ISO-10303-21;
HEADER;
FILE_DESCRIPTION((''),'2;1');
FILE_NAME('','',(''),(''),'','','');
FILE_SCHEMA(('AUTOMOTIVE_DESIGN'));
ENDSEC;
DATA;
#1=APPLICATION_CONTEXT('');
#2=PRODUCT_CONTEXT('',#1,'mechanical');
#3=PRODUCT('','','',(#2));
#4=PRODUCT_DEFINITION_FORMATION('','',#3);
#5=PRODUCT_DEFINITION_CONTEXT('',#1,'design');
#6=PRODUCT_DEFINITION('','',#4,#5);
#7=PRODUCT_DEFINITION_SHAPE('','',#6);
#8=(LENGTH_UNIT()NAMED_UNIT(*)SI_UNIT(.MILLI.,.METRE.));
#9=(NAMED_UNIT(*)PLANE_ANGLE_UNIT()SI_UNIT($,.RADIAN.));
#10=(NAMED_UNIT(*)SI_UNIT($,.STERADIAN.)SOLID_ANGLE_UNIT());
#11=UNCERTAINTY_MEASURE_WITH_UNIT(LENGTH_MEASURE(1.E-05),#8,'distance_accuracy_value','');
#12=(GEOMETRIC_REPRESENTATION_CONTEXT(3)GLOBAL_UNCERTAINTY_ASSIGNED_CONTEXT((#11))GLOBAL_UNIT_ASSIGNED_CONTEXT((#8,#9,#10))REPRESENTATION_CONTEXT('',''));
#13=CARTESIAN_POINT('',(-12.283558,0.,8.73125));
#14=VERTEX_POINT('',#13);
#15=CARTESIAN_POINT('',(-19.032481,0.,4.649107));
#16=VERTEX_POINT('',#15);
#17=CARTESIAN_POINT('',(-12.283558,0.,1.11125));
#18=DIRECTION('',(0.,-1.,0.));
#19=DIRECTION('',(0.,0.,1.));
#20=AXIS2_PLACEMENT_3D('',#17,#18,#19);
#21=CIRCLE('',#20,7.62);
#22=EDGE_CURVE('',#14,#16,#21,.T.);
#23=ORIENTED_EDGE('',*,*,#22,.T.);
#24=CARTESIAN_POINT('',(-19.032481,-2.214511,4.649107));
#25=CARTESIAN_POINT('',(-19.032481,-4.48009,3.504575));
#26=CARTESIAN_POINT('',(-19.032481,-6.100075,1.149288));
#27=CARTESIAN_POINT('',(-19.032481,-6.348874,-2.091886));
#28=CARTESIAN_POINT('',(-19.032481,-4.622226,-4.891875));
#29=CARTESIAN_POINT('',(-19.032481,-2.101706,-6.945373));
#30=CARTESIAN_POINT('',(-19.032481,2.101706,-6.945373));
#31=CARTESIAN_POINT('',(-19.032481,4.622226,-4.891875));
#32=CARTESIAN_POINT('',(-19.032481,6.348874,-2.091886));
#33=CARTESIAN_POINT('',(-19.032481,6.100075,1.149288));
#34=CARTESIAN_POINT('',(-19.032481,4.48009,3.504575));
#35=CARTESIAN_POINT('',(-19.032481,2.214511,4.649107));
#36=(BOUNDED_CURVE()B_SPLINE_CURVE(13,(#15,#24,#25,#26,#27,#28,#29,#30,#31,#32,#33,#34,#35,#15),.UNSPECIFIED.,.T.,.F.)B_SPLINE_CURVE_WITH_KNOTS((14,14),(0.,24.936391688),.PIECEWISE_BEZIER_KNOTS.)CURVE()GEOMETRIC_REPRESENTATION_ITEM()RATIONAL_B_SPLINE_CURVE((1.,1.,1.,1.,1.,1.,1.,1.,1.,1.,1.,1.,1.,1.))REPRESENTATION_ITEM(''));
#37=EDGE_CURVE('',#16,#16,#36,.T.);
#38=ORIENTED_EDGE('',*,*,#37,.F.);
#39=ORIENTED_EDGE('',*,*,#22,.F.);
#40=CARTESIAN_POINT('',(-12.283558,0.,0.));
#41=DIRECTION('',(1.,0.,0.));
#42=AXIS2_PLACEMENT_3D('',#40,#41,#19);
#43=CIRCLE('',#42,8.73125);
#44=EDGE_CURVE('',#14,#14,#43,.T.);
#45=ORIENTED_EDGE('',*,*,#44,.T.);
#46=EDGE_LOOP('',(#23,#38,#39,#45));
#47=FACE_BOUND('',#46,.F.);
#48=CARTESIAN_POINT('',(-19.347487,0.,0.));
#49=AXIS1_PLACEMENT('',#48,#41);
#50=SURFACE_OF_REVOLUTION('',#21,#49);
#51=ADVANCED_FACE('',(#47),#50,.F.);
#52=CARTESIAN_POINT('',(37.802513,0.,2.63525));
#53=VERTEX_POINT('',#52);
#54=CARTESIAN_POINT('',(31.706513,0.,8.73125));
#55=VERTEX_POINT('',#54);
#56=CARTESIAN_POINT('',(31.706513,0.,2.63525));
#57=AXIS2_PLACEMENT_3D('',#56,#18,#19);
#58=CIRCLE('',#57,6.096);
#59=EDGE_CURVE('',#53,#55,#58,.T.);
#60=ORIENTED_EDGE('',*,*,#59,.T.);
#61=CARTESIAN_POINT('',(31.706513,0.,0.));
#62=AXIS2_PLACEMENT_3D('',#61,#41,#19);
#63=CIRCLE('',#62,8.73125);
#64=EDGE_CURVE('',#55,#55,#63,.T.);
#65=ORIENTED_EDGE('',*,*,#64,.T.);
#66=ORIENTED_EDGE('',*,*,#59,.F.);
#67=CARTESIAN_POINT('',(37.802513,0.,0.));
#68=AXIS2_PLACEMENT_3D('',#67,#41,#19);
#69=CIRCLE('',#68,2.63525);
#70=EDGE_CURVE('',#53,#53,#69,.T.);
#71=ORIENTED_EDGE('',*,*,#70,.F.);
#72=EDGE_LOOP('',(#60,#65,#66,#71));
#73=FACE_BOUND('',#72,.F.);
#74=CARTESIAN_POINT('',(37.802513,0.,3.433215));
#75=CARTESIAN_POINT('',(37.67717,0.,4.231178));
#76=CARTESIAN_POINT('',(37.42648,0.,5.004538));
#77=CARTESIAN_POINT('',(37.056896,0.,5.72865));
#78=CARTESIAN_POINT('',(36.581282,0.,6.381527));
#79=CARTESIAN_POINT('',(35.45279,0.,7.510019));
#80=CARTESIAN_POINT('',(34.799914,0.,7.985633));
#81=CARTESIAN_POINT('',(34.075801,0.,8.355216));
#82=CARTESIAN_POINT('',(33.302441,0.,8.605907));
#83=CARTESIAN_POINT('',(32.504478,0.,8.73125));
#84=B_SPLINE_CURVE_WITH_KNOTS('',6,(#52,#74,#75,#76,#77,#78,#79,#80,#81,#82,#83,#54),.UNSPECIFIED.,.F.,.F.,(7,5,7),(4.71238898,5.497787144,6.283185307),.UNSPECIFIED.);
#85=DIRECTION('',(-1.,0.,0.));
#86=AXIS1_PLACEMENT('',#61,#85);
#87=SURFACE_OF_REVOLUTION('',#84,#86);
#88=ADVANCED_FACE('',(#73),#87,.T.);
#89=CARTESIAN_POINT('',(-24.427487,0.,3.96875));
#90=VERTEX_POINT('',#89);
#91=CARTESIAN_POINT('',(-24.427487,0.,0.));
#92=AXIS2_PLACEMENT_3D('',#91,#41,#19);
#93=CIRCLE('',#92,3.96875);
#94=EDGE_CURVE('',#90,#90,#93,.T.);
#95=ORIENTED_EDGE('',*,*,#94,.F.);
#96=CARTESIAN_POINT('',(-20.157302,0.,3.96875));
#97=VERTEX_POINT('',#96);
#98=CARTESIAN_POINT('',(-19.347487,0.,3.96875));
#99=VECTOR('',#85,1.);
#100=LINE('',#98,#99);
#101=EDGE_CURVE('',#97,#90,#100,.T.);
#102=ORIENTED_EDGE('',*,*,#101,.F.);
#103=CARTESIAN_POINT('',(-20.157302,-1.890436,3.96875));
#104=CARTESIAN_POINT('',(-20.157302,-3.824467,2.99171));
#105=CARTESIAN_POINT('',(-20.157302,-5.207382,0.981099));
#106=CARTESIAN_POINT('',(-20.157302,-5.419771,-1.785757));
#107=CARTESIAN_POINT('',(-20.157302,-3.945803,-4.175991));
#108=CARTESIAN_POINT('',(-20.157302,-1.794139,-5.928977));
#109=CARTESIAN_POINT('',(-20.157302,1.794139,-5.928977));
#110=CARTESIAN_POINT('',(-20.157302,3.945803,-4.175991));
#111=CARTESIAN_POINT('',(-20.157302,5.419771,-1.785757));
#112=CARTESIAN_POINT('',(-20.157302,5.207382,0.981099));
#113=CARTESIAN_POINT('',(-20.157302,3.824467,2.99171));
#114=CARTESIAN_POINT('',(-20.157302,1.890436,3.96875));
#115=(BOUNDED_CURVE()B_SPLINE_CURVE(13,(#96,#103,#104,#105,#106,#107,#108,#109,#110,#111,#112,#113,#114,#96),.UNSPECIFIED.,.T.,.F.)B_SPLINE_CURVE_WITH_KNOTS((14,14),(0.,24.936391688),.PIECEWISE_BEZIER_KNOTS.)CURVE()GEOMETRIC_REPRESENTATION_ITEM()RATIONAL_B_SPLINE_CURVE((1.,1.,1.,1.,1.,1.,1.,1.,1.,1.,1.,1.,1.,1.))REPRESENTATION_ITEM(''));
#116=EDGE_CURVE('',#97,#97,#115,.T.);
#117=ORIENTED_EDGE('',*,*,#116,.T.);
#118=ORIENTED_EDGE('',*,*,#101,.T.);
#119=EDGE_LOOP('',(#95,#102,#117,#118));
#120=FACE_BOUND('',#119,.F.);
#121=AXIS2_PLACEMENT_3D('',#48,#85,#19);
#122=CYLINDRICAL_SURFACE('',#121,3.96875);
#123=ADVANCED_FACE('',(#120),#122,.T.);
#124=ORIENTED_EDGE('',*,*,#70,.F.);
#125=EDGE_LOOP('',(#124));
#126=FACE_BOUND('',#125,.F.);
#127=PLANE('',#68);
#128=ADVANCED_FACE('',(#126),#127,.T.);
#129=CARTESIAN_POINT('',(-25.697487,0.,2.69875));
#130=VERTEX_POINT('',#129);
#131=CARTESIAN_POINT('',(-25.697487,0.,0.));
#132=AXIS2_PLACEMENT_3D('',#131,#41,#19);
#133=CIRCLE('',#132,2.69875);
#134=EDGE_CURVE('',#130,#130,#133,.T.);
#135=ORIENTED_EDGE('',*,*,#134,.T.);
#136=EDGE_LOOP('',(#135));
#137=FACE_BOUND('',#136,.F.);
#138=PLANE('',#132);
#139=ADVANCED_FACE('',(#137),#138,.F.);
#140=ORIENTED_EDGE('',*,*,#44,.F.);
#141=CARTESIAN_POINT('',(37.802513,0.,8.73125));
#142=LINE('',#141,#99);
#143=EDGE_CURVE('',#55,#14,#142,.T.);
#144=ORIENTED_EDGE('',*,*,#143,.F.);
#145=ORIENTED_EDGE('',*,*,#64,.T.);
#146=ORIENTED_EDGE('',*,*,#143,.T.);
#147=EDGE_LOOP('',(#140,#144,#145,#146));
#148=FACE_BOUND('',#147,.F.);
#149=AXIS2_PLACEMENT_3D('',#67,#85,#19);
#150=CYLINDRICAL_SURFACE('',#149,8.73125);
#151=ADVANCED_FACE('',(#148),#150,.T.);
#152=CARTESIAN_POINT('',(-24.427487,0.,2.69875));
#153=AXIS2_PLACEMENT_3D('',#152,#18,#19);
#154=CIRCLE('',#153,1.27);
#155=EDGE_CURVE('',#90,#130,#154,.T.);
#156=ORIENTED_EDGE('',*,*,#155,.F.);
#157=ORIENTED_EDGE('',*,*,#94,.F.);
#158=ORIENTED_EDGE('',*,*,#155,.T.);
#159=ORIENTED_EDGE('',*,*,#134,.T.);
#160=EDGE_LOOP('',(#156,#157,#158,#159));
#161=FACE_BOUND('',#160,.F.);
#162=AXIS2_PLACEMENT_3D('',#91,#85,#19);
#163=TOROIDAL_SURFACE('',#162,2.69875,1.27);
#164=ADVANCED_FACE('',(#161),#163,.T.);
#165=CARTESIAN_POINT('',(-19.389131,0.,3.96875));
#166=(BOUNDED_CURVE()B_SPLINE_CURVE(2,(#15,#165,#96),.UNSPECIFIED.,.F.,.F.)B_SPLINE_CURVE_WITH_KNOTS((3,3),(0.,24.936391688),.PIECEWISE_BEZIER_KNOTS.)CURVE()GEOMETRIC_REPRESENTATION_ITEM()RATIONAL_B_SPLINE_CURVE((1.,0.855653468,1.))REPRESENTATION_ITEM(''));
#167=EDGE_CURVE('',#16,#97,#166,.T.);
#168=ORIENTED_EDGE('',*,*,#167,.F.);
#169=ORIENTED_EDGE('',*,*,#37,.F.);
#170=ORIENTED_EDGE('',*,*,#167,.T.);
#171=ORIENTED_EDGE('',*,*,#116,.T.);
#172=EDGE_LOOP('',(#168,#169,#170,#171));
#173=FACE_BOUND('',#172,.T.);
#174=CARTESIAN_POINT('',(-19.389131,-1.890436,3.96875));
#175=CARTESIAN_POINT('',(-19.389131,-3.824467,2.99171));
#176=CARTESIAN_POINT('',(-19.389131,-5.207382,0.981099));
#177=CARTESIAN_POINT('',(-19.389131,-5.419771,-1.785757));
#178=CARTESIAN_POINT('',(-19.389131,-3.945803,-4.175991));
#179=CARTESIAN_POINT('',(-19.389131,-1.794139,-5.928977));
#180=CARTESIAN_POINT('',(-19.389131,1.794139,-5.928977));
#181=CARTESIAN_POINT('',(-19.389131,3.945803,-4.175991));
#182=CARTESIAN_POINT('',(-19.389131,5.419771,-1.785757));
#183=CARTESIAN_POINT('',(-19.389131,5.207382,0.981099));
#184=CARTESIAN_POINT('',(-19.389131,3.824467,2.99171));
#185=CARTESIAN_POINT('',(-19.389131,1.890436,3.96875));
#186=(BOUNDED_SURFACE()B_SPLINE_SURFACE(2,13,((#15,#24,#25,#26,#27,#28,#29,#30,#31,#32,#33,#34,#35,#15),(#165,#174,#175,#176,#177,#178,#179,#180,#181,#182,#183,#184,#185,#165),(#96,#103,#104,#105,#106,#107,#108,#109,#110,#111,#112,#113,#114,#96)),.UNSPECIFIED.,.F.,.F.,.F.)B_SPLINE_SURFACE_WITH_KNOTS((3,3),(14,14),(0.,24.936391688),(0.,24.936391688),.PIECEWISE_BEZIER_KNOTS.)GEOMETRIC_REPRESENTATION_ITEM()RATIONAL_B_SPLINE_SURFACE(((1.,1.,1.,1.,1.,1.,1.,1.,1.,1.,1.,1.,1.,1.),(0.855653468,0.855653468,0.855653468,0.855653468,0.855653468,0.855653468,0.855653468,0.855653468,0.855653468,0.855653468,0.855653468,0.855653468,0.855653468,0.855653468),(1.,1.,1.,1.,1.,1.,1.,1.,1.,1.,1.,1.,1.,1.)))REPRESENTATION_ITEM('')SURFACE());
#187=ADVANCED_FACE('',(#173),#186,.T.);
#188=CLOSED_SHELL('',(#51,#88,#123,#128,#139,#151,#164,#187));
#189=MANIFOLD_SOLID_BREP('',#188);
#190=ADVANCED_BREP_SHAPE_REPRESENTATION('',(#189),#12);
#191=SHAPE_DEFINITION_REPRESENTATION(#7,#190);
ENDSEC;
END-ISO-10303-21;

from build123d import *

# Parameters (mm, degrees)
F2_R = 6.096
F4_R = 1.27


# Not quite as in the source:
# - a fillet or chamfer that OpenCascade refuses, or shapes differently, is made with other operations: its cross-section is extruded or revolved along the edge and cut away or added


with BuildPart() as f1:
    # F0 (on Front) → F1 (revolve)
    with BuildSketch(Plane.XZ):
        Polygon((-25.6974867058, 3.96875), (-25.6974867058, 0), (37.8025132942, 0), (37.8025132942, 8.73125), (-19.3474867058, 8.73125), (-19.3474867058, 3.96875), align=None)
    revolve(axis=Axis((6.0525132942, 0, 0), (1, 0, 0)))

    # F2
    f2_edges = [f1.edges().sort_by_distance(p)[0] for p in [
        (37.802513, 0, -8.73125),
    ]]
    fillet(f2_edges, radius=F2_R)

    # F3: fillet of radius 7.62 on 1 edges, made by hand

    # F3_s1 → F3_t2 (revolve, cut)
    with BuildSketch(Plane.XZ):
        with BuildLine():
            ThreePointArc((-12.2835576468, 8.73125), (-16.543267144, 7.4294202256), (-19.3474867058, 3.96875))
            Line((-19.3474867058, 3.96875), (-19.3474867058, 8.73125))
            Line((-19.3474867058, 8.73125), (-12.2835576468, 8.73125))
        make_face()
    revolve(axis=Axis((-19.3474867058, 0, 0), (1, 0, 0)), mode=Mode.SUBTRACT)

    # F4
    f4_edges = [f1.edges().sort_by_distance(p)[0] for p in [
        (-22.522487, 0, 3.96875),
        (-25.697487, 0, -3.96875),
        (-19.347487, 0, -3.96875),
    ]]
    fillet(f4_edges, radius=F4_R)


solid = f1.part
